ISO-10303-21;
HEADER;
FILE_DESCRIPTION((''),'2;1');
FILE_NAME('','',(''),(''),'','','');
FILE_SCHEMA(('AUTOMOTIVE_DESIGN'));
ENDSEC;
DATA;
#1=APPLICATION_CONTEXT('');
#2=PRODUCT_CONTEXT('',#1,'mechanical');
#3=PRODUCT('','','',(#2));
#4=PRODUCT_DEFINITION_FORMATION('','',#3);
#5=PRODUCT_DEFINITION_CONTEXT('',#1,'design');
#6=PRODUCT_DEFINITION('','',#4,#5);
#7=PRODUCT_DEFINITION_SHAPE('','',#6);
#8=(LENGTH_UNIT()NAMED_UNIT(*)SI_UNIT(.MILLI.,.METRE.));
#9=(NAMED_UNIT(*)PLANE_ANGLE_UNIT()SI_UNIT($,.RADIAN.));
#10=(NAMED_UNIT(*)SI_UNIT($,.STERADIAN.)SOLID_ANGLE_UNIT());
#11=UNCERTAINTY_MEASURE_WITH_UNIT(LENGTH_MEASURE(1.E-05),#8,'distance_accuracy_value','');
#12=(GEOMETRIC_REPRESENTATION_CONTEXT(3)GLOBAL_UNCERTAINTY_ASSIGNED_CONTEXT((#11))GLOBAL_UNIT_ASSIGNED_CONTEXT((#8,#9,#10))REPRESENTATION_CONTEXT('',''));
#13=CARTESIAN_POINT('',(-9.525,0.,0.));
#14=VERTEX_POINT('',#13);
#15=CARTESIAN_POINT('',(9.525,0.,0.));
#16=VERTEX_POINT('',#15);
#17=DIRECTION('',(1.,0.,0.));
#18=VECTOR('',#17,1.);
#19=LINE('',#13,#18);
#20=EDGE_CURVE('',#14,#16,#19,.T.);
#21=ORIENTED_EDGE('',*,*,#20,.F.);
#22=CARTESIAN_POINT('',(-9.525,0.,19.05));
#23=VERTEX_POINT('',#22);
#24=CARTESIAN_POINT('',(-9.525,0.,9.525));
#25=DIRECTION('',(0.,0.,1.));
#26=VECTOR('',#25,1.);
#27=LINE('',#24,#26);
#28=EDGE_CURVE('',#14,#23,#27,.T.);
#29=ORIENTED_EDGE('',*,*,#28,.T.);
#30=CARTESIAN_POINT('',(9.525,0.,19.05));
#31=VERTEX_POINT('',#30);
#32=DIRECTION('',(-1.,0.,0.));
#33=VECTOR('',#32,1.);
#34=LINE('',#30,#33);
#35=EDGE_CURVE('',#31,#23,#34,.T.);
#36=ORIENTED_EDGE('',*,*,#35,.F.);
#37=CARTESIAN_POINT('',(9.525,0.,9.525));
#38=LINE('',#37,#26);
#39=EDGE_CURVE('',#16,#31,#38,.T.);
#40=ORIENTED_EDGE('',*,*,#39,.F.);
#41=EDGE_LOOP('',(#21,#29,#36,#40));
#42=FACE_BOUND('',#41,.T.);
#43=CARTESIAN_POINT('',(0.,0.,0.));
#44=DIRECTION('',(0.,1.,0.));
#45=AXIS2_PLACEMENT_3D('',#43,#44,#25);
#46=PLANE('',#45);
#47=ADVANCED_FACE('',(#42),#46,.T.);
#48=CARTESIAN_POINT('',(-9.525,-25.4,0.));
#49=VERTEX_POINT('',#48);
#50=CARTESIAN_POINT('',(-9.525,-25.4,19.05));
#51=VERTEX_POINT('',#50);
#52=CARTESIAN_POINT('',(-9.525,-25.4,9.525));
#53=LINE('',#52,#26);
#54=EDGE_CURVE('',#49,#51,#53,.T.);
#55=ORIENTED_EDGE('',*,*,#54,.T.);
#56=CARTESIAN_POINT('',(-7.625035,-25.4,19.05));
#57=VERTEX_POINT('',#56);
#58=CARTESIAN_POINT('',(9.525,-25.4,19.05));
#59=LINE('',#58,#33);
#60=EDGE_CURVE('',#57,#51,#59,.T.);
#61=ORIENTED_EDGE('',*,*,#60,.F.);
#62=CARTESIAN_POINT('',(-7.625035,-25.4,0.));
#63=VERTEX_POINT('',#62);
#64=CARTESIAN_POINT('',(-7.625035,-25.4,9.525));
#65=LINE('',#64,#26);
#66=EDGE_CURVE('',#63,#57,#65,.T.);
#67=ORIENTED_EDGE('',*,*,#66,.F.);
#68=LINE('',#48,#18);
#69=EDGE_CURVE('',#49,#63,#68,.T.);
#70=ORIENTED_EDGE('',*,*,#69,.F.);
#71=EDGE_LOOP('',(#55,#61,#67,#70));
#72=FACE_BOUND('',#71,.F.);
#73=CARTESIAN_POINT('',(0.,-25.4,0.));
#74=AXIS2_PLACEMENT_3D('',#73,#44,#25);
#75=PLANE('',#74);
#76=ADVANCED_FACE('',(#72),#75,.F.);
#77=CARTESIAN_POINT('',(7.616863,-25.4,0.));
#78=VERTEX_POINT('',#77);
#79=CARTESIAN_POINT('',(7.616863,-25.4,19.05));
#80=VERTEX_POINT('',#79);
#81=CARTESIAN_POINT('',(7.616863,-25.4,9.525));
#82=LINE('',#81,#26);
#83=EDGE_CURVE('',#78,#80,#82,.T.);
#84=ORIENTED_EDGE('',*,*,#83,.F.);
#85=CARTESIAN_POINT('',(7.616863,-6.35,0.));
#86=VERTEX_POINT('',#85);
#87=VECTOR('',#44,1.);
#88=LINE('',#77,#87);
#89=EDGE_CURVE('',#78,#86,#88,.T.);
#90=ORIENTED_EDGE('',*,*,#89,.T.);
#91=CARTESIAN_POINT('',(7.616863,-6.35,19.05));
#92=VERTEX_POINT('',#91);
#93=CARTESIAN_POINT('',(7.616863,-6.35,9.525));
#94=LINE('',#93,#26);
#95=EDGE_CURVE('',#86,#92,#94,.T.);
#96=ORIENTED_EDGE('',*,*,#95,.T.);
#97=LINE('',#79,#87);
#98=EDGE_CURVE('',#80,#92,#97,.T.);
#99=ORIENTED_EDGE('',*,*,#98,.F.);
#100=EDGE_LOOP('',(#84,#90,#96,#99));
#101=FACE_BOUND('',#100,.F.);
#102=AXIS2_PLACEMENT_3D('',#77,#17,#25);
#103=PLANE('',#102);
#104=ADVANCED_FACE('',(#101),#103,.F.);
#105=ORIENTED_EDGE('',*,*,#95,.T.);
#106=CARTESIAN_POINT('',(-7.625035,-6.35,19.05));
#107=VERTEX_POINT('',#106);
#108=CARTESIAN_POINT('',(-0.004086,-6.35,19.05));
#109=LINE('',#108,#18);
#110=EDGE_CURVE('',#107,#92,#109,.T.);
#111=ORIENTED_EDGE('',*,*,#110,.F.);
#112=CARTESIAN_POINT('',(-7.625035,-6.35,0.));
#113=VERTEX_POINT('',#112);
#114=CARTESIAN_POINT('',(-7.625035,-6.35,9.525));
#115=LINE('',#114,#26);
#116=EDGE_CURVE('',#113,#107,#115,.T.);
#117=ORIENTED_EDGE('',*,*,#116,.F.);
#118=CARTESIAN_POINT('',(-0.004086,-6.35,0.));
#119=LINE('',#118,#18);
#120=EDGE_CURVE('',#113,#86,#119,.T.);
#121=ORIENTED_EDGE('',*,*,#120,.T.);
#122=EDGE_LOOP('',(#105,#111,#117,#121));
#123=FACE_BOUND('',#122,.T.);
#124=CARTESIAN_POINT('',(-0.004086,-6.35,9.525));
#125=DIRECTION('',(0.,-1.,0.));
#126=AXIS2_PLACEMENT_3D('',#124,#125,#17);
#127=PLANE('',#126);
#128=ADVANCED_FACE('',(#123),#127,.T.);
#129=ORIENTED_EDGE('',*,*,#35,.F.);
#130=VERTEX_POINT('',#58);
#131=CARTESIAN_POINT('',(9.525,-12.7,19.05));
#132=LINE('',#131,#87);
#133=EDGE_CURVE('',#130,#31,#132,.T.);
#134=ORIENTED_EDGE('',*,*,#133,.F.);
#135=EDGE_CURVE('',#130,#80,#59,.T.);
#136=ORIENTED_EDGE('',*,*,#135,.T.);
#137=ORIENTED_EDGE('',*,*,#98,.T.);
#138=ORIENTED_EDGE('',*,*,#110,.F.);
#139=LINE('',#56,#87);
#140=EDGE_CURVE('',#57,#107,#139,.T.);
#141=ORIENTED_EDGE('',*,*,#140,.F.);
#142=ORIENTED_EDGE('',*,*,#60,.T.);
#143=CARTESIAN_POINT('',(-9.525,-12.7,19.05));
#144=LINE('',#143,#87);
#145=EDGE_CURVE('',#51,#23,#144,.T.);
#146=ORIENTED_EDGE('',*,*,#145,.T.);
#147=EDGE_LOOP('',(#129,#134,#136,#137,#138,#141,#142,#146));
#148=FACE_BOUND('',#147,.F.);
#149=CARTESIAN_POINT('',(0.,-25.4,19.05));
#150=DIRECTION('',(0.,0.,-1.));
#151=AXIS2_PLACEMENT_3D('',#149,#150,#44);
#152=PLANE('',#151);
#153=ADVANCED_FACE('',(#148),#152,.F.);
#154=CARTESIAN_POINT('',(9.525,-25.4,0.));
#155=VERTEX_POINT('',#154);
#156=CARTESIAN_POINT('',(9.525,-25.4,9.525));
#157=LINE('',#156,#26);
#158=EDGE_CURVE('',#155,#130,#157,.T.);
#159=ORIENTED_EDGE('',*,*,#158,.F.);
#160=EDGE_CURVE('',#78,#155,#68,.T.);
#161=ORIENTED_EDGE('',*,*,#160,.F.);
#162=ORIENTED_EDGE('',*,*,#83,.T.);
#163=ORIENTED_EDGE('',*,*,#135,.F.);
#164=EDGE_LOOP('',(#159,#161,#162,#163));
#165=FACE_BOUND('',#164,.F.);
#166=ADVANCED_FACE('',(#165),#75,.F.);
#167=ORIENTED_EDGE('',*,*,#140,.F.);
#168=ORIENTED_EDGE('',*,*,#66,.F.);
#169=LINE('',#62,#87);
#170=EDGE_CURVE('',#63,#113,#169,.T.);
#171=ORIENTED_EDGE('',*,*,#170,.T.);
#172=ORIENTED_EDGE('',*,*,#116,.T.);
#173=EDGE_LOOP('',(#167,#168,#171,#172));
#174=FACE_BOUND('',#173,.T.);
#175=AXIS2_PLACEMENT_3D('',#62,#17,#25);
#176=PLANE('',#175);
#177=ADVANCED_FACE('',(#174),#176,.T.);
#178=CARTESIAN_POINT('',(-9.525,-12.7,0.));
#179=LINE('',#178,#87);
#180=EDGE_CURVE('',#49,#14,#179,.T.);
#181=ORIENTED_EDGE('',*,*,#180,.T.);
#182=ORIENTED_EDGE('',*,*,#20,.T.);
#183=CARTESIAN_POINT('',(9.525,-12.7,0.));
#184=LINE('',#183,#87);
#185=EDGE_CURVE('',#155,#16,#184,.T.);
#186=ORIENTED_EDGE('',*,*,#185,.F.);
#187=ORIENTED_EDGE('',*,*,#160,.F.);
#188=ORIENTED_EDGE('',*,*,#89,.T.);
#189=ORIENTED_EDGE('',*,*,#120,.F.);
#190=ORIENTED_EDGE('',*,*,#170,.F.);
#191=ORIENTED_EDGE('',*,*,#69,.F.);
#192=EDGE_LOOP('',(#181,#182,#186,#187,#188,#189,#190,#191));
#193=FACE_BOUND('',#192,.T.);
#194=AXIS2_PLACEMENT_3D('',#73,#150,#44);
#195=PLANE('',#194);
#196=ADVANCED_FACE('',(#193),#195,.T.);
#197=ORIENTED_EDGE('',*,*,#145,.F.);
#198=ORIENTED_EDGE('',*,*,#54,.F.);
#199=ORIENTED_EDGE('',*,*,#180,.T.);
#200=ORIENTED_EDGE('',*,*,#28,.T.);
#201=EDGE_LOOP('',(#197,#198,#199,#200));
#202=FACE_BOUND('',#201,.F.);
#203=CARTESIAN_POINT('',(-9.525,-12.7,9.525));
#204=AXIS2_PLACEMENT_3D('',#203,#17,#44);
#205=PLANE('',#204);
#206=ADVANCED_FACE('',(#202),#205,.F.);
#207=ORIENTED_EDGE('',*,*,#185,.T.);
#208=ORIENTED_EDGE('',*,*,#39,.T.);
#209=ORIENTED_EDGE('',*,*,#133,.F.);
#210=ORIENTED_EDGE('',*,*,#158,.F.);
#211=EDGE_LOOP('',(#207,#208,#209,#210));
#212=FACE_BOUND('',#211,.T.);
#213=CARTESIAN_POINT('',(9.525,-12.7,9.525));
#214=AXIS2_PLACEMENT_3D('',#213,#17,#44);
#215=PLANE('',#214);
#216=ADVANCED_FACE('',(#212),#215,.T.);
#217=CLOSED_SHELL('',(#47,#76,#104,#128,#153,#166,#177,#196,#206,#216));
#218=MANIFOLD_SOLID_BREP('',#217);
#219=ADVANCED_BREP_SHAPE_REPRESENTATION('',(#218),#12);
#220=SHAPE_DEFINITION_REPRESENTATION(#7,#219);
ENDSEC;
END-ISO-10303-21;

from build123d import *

# Parameters (mm, degrees)
F0_W     = 25.4
F0_H     = 19.05
F1_DEPTH = 9.525
F2_W     = 15.2418981306
F2_H     = 19.05
F3_DEPTH = 19.05


# Not quite as in the source:
# - a feature names something its author has since deleted; it is built from what else it names


with BuildPart() as f1:
    # F0 (on Right) → F1 (new body, symmetric)
    with BuildSketch(Plane.YZ):
        with Locations((-12.7, 9.525)):
            Rectangle(F0_W, F0_H)
    extrude(amount=F1_DEPTH, both=True)

    # F2 (on face) → F3 (cut)
    with BuildSketch(Plane.XZ.offset(25.4)):
        with Locations((-0.004085945, 9.525)):
            Rectangle(F2_W, F2_H)
    extrude(amount=-F3_DEPTH, mode=Mode.SUBTRACT)


solid = f1.part
